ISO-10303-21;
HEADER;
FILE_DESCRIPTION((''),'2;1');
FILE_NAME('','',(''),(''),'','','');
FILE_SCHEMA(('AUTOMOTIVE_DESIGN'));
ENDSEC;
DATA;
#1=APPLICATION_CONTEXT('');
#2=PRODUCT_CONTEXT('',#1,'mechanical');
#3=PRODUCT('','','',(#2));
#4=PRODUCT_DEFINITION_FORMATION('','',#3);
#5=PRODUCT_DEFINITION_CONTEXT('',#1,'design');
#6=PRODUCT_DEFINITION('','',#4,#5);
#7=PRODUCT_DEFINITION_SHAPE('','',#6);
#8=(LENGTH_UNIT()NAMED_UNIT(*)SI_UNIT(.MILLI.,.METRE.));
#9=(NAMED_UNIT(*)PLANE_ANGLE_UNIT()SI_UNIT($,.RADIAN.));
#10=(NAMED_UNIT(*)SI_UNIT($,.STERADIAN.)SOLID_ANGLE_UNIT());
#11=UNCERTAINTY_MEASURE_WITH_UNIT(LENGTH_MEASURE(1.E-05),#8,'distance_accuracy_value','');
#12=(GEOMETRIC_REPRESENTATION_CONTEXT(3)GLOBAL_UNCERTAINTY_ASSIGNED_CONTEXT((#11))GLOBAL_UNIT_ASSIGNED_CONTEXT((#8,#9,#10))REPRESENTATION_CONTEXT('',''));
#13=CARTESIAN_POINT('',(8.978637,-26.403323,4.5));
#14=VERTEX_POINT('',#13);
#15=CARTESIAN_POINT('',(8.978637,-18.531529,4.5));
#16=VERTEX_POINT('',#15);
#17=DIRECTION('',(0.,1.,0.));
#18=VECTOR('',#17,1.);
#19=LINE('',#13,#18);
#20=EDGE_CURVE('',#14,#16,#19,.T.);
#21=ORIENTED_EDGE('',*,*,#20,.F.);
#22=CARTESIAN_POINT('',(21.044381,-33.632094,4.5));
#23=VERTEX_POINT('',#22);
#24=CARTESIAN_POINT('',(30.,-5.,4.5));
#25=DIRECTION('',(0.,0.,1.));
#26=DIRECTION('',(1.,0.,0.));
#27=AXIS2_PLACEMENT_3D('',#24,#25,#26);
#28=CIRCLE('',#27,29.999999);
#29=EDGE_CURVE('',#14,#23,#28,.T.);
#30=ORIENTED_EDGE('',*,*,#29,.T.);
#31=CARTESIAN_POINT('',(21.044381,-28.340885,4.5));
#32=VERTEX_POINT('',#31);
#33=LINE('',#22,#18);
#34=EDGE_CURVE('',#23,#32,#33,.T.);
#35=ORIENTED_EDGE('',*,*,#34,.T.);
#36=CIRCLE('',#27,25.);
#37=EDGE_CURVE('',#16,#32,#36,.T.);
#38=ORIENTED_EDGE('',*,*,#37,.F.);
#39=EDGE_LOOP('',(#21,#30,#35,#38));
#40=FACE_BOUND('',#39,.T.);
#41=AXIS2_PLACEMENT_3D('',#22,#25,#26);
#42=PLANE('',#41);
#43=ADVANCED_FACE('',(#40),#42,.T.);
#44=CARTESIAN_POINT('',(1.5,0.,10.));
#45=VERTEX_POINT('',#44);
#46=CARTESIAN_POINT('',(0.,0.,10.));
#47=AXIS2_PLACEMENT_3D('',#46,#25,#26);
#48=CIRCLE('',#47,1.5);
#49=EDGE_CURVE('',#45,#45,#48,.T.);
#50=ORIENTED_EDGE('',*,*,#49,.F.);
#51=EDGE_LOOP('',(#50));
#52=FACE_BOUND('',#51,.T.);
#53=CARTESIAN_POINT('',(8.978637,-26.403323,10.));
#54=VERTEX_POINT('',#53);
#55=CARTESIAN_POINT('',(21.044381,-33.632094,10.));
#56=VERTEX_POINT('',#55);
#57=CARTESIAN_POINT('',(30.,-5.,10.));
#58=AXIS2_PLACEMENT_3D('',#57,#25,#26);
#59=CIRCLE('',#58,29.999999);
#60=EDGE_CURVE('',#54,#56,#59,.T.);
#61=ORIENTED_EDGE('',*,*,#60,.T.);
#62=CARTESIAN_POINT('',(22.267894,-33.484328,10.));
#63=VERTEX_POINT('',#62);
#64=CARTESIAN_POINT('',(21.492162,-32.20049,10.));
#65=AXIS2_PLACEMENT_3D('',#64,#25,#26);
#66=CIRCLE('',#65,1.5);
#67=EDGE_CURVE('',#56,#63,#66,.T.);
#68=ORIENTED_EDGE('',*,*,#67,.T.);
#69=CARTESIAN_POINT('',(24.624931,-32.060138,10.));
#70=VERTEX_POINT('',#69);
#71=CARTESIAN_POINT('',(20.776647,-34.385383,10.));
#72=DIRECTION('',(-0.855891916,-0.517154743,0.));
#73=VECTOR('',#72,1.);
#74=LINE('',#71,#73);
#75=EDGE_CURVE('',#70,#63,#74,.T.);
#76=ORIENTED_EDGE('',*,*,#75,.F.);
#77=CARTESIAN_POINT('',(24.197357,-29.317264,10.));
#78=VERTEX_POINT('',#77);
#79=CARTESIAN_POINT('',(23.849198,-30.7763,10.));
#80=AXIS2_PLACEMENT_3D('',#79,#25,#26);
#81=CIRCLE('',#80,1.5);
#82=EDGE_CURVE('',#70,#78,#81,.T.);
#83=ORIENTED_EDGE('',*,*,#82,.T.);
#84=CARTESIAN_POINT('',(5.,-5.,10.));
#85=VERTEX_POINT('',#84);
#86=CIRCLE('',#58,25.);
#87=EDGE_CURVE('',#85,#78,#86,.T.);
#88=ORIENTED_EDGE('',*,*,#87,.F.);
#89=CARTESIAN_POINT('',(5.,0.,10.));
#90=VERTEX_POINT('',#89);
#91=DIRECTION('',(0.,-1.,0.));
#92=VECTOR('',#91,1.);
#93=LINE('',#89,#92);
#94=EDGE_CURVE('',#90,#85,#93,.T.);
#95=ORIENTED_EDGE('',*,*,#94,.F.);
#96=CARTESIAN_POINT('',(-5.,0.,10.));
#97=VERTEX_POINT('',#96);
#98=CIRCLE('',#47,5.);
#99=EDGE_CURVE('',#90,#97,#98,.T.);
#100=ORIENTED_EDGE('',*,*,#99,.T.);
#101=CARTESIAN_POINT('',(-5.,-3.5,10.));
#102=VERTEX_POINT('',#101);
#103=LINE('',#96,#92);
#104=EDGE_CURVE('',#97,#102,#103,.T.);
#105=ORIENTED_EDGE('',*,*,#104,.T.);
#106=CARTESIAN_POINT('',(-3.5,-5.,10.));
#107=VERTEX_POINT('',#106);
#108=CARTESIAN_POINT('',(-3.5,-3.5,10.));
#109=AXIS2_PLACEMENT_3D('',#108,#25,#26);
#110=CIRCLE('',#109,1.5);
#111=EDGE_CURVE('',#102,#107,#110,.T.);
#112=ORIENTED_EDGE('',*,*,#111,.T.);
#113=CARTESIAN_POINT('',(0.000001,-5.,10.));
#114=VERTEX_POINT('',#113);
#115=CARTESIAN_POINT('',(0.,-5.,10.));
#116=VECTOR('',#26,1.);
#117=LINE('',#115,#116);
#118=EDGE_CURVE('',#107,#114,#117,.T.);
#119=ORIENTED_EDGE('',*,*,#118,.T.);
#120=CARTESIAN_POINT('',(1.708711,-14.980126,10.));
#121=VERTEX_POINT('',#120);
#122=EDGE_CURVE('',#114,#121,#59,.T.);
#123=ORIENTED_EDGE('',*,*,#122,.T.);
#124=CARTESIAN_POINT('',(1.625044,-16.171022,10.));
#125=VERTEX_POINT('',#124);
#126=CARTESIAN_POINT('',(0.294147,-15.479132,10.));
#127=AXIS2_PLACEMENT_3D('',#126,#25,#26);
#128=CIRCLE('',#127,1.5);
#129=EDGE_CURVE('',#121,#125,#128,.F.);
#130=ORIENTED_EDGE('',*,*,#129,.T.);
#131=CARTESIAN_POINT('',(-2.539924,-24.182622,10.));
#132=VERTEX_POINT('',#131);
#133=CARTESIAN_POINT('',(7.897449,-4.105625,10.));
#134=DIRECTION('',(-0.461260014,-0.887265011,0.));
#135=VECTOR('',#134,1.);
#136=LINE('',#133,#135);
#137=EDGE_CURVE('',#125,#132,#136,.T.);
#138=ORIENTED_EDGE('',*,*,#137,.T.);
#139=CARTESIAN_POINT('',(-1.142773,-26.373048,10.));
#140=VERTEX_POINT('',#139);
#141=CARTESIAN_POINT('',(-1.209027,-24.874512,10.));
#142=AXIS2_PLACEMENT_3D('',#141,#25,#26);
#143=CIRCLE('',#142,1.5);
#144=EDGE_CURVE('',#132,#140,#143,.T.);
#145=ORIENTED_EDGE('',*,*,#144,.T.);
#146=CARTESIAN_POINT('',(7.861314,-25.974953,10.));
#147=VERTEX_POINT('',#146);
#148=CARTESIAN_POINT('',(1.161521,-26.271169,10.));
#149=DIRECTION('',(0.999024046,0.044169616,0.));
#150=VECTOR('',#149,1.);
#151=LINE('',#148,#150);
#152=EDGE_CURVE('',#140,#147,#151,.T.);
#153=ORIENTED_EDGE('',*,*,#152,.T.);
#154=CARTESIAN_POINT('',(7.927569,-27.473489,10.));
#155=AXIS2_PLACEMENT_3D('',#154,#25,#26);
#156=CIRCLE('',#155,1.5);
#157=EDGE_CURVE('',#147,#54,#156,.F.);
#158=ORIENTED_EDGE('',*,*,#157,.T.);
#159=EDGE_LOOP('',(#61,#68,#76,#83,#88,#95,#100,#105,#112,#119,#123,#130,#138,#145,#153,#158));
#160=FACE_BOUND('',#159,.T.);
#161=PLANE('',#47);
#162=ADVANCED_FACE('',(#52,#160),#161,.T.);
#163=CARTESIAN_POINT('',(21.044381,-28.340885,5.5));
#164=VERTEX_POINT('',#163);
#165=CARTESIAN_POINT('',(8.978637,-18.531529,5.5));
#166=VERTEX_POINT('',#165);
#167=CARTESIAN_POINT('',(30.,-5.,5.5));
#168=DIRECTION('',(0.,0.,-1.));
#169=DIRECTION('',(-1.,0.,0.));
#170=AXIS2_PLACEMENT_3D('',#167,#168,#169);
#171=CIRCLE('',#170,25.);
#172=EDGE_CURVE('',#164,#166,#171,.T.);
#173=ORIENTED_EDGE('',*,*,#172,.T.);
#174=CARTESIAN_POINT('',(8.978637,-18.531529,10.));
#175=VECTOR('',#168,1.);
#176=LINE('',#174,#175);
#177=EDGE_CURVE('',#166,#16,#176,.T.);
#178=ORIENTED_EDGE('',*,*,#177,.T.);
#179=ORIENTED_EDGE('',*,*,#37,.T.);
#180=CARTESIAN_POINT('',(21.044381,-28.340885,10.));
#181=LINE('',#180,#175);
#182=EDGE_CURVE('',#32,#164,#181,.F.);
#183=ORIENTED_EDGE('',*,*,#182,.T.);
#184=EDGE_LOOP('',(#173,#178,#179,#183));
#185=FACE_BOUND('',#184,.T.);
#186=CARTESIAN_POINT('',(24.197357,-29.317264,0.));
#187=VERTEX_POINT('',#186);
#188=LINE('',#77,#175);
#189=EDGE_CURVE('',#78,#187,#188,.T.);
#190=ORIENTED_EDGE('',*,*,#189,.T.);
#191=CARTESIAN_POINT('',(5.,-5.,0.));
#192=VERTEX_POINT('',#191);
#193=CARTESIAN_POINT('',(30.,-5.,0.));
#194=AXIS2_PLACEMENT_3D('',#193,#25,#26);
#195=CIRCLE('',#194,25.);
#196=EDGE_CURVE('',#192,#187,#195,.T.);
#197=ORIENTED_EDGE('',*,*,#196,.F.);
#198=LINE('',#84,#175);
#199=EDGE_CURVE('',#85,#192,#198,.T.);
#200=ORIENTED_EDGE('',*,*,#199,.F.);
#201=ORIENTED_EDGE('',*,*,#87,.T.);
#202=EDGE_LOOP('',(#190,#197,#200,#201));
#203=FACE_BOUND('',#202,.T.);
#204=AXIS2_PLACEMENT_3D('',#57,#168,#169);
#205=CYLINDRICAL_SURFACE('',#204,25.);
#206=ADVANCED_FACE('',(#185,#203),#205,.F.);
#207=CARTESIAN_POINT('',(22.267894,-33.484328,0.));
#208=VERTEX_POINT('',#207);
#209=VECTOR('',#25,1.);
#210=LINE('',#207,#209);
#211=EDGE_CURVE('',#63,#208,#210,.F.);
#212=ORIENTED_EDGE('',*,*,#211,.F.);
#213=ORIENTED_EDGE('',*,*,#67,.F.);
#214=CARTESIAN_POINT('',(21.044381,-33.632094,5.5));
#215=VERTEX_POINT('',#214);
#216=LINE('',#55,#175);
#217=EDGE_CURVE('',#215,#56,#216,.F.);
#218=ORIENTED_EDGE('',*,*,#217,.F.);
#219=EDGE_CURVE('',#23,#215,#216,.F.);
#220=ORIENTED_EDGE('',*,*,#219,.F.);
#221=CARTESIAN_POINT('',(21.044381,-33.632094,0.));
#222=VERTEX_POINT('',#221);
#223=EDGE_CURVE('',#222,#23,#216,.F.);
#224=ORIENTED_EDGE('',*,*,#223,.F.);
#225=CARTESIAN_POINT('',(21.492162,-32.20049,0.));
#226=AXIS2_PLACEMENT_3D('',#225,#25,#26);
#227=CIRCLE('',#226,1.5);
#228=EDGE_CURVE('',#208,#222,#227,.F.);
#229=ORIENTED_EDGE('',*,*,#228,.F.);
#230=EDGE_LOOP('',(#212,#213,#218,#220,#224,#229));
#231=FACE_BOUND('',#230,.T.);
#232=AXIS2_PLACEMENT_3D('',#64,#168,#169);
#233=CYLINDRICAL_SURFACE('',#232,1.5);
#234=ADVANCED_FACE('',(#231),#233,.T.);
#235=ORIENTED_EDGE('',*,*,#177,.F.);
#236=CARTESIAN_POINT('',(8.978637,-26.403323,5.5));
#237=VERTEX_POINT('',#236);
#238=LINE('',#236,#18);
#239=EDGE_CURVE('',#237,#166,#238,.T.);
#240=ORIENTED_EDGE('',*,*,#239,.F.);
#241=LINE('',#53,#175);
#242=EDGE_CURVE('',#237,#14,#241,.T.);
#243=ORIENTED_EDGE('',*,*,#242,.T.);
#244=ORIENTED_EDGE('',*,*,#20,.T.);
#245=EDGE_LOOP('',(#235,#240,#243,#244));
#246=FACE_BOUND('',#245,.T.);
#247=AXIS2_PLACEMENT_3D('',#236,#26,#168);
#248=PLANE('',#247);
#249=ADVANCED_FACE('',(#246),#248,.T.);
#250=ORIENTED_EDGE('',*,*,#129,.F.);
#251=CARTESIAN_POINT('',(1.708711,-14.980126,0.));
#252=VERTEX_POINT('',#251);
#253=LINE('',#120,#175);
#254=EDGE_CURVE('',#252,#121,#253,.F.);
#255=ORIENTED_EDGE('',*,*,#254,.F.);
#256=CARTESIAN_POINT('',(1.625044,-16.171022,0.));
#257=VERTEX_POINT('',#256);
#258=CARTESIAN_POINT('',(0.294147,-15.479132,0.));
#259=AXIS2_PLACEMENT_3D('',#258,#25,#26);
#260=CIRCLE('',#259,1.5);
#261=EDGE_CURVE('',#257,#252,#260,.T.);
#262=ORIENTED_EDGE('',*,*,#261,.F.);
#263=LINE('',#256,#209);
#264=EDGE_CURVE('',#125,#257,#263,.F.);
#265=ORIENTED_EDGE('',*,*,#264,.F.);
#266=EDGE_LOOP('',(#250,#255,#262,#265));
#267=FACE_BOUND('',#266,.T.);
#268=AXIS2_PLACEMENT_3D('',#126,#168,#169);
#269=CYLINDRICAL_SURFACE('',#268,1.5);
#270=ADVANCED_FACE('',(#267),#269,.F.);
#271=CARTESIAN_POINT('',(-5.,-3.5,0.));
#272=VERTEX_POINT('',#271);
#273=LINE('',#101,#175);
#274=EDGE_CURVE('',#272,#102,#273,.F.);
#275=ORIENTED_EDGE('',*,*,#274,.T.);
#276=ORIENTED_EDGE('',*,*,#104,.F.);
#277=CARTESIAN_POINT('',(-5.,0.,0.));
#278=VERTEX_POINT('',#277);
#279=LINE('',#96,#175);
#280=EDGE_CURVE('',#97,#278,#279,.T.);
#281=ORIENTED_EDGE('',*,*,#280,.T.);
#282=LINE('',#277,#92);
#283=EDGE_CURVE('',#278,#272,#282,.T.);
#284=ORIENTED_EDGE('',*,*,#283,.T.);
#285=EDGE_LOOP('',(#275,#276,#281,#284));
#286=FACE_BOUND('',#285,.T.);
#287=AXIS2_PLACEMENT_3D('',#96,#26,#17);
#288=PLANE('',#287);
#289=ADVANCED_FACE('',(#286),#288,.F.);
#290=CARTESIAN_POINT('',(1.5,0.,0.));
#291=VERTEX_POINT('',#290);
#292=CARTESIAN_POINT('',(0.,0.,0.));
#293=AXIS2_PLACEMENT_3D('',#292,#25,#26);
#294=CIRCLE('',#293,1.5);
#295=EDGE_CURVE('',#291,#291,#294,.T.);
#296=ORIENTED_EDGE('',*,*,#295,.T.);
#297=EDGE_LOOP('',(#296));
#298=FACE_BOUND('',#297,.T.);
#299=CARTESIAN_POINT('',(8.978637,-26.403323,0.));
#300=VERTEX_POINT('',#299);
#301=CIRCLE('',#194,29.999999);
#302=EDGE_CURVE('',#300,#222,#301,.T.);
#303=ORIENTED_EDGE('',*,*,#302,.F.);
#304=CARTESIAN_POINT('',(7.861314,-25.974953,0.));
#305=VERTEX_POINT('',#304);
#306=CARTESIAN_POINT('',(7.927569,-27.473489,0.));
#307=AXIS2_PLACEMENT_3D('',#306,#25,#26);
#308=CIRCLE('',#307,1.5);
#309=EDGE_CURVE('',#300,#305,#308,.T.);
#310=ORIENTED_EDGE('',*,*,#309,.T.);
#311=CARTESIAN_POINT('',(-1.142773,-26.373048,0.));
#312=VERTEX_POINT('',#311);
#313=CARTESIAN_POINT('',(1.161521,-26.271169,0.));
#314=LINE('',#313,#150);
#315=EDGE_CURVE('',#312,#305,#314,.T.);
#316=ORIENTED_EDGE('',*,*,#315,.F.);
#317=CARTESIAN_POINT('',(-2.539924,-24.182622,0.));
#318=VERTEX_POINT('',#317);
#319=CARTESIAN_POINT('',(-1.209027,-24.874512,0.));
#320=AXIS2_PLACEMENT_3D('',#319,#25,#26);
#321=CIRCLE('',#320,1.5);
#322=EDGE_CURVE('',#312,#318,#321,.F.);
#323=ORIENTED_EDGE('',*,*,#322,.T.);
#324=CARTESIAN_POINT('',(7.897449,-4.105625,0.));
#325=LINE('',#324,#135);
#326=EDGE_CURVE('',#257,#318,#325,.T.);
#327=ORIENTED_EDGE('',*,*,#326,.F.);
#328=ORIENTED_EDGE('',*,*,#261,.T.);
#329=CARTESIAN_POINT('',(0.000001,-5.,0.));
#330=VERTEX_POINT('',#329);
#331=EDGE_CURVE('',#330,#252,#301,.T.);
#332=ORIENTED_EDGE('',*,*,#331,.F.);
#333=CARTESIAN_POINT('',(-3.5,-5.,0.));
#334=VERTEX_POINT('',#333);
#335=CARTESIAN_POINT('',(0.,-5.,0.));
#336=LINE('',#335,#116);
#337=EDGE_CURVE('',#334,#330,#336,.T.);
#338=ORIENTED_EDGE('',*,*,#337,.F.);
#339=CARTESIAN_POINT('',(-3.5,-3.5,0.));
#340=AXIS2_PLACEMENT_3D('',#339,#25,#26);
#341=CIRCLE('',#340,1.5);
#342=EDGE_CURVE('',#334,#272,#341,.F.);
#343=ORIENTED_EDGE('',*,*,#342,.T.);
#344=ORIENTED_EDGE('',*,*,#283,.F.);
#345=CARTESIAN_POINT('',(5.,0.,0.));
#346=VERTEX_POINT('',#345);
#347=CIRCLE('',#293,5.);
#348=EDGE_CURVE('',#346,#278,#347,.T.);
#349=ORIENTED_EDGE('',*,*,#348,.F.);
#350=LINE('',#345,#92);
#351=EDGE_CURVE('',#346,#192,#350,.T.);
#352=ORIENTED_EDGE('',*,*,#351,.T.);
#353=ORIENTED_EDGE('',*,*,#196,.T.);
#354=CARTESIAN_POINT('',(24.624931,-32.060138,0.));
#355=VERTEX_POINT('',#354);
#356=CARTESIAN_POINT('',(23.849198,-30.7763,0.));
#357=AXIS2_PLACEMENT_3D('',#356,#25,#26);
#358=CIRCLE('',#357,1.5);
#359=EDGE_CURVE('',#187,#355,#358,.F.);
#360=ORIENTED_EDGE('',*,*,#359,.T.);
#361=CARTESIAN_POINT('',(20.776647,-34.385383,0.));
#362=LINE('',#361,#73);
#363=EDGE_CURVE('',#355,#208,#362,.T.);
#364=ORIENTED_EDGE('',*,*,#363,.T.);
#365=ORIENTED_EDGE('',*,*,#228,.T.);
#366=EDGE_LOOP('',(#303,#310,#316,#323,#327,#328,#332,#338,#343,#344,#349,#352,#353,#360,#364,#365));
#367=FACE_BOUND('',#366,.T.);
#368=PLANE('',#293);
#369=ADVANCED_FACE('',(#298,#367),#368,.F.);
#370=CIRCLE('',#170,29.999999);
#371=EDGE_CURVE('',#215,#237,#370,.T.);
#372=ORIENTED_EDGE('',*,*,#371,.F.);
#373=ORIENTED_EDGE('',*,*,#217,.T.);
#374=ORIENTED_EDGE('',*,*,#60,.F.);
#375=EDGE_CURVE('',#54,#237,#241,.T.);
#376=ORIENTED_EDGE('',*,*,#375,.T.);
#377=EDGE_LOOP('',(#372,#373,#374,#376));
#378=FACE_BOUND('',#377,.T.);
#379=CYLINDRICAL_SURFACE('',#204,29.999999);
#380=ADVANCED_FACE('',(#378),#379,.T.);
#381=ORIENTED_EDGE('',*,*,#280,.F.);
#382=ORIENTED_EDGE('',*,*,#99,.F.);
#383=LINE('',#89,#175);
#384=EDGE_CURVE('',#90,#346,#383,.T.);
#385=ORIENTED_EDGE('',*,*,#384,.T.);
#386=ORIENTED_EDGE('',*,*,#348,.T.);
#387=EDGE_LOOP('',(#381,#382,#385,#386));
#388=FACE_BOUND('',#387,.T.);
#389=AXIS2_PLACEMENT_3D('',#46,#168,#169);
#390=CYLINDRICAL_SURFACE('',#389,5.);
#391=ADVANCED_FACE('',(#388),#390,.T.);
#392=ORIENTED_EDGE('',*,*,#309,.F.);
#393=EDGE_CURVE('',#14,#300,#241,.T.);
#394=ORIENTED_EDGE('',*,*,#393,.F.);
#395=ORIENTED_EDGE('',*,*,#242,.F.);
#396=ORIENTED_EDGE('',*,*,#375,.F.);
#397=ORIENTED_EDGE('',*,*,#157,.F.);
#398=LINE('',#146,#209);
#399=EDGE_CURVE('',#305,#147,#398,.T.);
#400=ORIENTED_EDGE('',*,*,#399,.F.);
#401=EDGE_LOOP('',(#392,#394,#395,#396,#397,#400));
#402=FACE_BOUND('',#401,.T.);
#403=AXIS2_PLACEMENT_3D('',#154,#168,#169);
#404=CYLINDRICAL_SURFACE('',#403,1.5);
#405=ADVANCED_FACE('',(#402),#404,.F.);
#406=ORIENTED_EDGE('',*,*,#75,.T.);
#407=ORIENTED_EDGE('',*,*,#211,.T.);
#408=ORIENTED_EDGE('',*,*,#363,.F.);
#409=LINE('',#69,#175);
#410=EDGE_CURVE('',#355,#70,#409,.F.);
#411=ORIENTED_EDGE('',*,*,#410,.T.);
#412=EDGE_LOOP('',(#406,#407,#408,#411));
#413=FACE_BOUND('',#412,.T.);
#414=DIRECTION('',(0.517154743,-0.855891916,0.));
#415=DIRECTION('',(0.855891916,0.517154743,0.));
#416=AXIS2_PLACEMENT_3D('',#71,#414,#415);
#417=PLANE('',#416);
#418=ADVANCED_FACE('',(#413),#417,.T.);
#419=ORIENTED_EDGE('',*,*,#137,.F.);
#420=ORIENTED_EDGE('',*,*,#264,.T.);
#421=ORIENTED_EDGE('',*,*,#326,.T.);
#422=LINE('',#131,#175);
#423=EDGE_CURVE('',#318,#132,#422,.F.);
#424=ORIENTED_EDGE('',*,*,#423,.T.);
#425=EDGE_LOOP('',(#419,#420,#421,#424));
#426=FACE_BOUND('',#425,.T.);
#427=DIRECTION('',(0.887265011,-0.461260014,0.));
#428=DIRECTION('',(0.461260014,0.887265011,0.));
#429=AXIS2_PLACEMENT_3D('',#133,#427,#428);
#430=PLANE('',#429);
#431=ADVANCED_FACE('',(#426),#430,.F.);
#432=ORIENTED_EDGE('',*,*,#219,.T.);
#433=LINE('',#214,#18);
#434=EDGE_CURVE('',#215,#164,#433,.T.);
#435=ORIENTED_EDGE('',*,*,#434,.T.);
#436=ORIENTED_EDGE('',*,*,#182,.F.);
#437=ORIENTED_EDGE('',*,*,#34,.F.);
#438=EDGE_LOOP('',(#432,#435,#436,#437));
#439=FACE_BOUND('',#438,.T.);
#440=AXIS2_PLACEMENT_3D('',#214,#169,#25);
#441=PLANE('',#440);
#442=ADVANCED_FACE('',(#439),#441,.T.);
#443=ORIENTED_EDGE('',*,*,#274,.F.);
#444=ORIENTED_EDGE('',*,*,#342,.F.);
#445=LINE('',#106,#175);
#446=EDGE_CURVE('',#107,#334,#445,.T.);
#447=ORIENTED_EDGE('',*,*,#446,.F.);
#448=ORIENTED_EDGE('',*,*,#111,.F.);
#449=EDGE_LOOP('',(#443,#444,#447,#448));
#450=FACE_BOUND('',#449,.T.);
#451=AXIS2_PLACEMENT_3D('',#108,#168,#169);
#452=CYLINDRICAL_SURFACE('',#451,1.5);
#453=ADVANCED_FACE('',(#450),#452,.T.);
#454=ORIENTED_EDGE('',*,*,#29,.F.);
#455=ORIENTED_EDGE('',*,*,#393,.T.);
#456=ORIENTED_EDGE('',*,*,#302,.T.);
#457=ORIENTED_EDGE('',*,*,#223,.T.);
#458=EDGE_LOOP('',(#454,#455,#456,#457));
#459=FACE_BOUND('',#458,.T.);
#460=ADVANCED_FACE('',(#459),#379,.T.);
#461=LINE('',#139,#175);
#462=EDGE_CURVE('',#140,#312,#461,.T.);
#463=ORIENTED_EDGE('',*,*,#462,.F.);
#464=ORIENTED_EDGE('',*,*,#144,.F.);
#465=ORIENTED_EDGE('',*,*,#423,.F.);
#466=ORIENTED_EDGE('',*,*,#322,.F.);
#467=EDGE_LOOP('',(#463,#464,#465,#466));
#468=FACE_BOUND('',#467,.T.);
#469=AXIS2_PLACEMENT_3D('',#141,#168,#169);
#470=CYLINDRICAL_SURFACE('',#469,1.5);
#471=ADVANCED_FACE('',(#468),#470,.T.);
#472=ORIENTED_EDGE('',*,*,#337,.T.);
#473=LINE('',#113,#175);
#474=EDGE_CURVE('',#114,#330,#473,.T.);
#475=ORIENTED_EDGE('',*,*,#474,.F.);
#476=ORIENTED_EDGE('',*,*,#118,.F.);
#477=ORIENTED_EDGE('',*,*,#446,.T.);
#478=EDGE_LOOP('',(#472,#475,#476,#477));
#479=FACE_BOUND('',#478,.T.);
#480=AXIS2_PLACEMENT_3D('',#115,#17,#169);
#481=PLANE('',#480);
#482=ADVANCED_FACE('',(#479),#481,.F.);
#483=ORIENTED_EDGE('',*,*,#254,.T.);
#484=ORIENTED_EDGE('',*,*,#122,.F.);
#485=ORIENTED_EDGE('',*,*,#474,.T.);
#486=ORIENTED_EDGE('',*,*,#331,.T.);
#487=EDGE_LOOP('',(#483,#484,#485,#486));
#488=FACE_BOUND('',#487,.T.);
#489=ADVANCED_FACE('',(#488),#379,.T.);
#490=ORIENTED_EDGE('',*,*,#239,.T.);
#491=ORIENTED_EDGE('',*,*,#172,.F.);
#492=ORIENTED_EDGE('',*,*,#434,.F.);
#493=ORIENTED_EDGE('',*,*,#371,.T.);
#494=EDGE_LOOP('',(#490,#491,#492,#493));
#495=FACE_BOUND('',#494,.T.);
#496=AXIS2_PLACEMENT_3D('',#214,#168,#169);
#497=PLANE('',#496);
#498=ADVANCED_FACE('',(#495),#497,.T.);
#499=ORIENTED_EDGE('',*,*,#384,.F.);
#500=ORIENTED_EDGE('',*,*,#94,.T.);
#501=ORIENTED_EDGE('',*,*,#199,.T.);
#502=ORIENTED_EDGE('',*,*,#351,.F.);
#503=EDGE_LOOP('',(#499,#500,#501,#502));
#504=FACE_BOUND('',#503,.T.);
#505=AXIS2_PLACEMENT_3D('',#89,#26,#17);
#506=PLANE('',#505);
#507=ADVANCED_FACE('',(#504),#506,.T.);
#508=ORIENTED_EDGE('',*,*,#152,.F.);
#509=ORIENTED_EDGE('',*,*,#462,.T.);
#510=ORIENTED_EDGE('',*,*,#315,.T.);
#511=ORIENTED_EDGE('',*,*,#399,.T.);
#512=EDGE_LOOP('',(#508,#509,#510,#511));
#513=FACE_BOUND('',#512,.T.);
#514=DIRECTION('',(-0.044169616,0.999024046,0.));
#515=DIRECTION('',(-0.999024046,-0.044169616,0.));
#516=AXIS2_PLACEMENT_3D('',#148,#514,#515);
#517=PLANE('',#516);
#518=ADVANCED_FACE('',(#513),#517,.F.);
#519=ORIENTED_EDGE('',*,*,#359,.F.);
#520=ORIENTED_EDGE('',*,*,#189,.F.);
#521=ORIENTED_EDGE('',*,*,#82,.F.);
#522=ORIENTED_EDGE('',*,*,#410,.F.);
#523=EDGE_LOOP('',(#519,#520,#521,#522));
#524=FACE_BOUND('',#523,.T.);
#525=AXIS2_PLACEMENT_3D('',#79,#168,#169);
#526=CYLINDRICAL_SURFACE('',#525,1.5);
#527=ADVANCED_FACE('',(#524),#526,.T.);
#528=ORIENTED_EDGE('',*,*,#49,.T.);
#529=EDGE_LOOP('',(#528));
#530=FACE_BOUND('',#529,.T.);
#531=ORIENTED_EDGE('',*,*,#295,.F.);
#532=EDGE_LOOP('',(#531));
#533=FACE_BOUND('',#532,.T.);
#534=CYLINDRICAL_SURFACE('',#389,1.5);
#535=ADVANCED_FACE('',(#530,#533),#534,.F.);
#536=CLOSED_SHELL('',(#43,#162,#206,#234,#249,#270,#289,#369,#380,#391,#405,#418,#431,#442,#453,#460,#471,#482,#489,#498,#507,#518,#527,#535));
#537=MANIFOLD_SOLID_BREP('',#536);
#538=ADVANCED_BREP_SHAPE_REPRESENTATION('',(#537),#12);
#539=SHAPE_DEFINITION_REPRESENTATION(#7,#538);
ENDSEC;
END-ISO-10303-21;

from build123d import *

# Parameters (mm, degrees)
SKETCH_2_R              = 1.5
EXTRUDE_1_DEPTH         = 10
FILLET_1_R              = 1.5
CUT_EXTRUDE_START       = 8.978636738
CUT_EXTRUDE_6_OUTLINE_W = 18
CUT_EXTRUDE_6_OUTLINE_H = 1
CUT_EXTRUDE_6_DEPTH     = 12.065744551


# Read off the part's stored shape, not the designer's step: 切除-拉伸6
with BuildPart() as part:
    # 草图2 → 凸台-拉伸1 (new body)
    with BuildSketch(Plane.XY):
        with BuildLine():
            Line((-3.738313135, -26.487804482), (8.522639585, -25.945713856))
            ThreePointArc((8.522639585, -25.945713856), (14.597644225, -30.744268797), (21.698305683, -33.828489568))
            Line((21.698305683, -33.828489568), (28.148131868, -29.931317342))
            ThreePointArc((28.148131868, -29.931317342), (11.679291726, -22.010339454), (5, -5))
            Line((5, -5), (5, 0))
            ThreePointArc((5, 0), (0, 5), (-5, 0))
            Line((-5, 0), (-5, -5))
            Line((-5, -5), (1.011e-06, -5))
            ThreePointArc((1.011e-06, -5), (0.486326168, -10.379869542), (1.929534162, -15.585314685))
            Line((1.929534162, -15.585314685), (-3.738313135, -26.487804482))
        make_face()
        Circle(SKETCH_2_R, mode=Mode.SUBTRACT)
    extrude(amount=EXTRUDE_1_DEPTH)

    # 圆角1
    fillet_1_edges = [part.edges().sort_by_distance(p)[0] for p in [
        (-3.738313135, -26.487804482, 5),
        (1.929534162, -15.585314685, 5),
        (-5, -5, 5),
        (28.148131868, -29.931317342, 5),
        (21.698305683, -33.828489568, 5),
        (8.522639585, -25.945713856, 5),
    ]]
    fillet(fillet_1_edges, radius=FILLET_1_R)

    # 切除-拉伸6 outline → 切除-拉伸6 (cut)
    with BuildSketch(Plane.YZ.offset(CUT_EXTRUDE_START)):
        with Locations((-26, 5)):
            Rectangle(CUT_EXTRUDE_6_OUTLINE_W, CUT_EXTRUDE_6_OUTLINE_H)
    extrude(amount=CUT_EXTRUDE_6_DEPTH, mode=Mode.SUBTRACT)


solid = part.part
